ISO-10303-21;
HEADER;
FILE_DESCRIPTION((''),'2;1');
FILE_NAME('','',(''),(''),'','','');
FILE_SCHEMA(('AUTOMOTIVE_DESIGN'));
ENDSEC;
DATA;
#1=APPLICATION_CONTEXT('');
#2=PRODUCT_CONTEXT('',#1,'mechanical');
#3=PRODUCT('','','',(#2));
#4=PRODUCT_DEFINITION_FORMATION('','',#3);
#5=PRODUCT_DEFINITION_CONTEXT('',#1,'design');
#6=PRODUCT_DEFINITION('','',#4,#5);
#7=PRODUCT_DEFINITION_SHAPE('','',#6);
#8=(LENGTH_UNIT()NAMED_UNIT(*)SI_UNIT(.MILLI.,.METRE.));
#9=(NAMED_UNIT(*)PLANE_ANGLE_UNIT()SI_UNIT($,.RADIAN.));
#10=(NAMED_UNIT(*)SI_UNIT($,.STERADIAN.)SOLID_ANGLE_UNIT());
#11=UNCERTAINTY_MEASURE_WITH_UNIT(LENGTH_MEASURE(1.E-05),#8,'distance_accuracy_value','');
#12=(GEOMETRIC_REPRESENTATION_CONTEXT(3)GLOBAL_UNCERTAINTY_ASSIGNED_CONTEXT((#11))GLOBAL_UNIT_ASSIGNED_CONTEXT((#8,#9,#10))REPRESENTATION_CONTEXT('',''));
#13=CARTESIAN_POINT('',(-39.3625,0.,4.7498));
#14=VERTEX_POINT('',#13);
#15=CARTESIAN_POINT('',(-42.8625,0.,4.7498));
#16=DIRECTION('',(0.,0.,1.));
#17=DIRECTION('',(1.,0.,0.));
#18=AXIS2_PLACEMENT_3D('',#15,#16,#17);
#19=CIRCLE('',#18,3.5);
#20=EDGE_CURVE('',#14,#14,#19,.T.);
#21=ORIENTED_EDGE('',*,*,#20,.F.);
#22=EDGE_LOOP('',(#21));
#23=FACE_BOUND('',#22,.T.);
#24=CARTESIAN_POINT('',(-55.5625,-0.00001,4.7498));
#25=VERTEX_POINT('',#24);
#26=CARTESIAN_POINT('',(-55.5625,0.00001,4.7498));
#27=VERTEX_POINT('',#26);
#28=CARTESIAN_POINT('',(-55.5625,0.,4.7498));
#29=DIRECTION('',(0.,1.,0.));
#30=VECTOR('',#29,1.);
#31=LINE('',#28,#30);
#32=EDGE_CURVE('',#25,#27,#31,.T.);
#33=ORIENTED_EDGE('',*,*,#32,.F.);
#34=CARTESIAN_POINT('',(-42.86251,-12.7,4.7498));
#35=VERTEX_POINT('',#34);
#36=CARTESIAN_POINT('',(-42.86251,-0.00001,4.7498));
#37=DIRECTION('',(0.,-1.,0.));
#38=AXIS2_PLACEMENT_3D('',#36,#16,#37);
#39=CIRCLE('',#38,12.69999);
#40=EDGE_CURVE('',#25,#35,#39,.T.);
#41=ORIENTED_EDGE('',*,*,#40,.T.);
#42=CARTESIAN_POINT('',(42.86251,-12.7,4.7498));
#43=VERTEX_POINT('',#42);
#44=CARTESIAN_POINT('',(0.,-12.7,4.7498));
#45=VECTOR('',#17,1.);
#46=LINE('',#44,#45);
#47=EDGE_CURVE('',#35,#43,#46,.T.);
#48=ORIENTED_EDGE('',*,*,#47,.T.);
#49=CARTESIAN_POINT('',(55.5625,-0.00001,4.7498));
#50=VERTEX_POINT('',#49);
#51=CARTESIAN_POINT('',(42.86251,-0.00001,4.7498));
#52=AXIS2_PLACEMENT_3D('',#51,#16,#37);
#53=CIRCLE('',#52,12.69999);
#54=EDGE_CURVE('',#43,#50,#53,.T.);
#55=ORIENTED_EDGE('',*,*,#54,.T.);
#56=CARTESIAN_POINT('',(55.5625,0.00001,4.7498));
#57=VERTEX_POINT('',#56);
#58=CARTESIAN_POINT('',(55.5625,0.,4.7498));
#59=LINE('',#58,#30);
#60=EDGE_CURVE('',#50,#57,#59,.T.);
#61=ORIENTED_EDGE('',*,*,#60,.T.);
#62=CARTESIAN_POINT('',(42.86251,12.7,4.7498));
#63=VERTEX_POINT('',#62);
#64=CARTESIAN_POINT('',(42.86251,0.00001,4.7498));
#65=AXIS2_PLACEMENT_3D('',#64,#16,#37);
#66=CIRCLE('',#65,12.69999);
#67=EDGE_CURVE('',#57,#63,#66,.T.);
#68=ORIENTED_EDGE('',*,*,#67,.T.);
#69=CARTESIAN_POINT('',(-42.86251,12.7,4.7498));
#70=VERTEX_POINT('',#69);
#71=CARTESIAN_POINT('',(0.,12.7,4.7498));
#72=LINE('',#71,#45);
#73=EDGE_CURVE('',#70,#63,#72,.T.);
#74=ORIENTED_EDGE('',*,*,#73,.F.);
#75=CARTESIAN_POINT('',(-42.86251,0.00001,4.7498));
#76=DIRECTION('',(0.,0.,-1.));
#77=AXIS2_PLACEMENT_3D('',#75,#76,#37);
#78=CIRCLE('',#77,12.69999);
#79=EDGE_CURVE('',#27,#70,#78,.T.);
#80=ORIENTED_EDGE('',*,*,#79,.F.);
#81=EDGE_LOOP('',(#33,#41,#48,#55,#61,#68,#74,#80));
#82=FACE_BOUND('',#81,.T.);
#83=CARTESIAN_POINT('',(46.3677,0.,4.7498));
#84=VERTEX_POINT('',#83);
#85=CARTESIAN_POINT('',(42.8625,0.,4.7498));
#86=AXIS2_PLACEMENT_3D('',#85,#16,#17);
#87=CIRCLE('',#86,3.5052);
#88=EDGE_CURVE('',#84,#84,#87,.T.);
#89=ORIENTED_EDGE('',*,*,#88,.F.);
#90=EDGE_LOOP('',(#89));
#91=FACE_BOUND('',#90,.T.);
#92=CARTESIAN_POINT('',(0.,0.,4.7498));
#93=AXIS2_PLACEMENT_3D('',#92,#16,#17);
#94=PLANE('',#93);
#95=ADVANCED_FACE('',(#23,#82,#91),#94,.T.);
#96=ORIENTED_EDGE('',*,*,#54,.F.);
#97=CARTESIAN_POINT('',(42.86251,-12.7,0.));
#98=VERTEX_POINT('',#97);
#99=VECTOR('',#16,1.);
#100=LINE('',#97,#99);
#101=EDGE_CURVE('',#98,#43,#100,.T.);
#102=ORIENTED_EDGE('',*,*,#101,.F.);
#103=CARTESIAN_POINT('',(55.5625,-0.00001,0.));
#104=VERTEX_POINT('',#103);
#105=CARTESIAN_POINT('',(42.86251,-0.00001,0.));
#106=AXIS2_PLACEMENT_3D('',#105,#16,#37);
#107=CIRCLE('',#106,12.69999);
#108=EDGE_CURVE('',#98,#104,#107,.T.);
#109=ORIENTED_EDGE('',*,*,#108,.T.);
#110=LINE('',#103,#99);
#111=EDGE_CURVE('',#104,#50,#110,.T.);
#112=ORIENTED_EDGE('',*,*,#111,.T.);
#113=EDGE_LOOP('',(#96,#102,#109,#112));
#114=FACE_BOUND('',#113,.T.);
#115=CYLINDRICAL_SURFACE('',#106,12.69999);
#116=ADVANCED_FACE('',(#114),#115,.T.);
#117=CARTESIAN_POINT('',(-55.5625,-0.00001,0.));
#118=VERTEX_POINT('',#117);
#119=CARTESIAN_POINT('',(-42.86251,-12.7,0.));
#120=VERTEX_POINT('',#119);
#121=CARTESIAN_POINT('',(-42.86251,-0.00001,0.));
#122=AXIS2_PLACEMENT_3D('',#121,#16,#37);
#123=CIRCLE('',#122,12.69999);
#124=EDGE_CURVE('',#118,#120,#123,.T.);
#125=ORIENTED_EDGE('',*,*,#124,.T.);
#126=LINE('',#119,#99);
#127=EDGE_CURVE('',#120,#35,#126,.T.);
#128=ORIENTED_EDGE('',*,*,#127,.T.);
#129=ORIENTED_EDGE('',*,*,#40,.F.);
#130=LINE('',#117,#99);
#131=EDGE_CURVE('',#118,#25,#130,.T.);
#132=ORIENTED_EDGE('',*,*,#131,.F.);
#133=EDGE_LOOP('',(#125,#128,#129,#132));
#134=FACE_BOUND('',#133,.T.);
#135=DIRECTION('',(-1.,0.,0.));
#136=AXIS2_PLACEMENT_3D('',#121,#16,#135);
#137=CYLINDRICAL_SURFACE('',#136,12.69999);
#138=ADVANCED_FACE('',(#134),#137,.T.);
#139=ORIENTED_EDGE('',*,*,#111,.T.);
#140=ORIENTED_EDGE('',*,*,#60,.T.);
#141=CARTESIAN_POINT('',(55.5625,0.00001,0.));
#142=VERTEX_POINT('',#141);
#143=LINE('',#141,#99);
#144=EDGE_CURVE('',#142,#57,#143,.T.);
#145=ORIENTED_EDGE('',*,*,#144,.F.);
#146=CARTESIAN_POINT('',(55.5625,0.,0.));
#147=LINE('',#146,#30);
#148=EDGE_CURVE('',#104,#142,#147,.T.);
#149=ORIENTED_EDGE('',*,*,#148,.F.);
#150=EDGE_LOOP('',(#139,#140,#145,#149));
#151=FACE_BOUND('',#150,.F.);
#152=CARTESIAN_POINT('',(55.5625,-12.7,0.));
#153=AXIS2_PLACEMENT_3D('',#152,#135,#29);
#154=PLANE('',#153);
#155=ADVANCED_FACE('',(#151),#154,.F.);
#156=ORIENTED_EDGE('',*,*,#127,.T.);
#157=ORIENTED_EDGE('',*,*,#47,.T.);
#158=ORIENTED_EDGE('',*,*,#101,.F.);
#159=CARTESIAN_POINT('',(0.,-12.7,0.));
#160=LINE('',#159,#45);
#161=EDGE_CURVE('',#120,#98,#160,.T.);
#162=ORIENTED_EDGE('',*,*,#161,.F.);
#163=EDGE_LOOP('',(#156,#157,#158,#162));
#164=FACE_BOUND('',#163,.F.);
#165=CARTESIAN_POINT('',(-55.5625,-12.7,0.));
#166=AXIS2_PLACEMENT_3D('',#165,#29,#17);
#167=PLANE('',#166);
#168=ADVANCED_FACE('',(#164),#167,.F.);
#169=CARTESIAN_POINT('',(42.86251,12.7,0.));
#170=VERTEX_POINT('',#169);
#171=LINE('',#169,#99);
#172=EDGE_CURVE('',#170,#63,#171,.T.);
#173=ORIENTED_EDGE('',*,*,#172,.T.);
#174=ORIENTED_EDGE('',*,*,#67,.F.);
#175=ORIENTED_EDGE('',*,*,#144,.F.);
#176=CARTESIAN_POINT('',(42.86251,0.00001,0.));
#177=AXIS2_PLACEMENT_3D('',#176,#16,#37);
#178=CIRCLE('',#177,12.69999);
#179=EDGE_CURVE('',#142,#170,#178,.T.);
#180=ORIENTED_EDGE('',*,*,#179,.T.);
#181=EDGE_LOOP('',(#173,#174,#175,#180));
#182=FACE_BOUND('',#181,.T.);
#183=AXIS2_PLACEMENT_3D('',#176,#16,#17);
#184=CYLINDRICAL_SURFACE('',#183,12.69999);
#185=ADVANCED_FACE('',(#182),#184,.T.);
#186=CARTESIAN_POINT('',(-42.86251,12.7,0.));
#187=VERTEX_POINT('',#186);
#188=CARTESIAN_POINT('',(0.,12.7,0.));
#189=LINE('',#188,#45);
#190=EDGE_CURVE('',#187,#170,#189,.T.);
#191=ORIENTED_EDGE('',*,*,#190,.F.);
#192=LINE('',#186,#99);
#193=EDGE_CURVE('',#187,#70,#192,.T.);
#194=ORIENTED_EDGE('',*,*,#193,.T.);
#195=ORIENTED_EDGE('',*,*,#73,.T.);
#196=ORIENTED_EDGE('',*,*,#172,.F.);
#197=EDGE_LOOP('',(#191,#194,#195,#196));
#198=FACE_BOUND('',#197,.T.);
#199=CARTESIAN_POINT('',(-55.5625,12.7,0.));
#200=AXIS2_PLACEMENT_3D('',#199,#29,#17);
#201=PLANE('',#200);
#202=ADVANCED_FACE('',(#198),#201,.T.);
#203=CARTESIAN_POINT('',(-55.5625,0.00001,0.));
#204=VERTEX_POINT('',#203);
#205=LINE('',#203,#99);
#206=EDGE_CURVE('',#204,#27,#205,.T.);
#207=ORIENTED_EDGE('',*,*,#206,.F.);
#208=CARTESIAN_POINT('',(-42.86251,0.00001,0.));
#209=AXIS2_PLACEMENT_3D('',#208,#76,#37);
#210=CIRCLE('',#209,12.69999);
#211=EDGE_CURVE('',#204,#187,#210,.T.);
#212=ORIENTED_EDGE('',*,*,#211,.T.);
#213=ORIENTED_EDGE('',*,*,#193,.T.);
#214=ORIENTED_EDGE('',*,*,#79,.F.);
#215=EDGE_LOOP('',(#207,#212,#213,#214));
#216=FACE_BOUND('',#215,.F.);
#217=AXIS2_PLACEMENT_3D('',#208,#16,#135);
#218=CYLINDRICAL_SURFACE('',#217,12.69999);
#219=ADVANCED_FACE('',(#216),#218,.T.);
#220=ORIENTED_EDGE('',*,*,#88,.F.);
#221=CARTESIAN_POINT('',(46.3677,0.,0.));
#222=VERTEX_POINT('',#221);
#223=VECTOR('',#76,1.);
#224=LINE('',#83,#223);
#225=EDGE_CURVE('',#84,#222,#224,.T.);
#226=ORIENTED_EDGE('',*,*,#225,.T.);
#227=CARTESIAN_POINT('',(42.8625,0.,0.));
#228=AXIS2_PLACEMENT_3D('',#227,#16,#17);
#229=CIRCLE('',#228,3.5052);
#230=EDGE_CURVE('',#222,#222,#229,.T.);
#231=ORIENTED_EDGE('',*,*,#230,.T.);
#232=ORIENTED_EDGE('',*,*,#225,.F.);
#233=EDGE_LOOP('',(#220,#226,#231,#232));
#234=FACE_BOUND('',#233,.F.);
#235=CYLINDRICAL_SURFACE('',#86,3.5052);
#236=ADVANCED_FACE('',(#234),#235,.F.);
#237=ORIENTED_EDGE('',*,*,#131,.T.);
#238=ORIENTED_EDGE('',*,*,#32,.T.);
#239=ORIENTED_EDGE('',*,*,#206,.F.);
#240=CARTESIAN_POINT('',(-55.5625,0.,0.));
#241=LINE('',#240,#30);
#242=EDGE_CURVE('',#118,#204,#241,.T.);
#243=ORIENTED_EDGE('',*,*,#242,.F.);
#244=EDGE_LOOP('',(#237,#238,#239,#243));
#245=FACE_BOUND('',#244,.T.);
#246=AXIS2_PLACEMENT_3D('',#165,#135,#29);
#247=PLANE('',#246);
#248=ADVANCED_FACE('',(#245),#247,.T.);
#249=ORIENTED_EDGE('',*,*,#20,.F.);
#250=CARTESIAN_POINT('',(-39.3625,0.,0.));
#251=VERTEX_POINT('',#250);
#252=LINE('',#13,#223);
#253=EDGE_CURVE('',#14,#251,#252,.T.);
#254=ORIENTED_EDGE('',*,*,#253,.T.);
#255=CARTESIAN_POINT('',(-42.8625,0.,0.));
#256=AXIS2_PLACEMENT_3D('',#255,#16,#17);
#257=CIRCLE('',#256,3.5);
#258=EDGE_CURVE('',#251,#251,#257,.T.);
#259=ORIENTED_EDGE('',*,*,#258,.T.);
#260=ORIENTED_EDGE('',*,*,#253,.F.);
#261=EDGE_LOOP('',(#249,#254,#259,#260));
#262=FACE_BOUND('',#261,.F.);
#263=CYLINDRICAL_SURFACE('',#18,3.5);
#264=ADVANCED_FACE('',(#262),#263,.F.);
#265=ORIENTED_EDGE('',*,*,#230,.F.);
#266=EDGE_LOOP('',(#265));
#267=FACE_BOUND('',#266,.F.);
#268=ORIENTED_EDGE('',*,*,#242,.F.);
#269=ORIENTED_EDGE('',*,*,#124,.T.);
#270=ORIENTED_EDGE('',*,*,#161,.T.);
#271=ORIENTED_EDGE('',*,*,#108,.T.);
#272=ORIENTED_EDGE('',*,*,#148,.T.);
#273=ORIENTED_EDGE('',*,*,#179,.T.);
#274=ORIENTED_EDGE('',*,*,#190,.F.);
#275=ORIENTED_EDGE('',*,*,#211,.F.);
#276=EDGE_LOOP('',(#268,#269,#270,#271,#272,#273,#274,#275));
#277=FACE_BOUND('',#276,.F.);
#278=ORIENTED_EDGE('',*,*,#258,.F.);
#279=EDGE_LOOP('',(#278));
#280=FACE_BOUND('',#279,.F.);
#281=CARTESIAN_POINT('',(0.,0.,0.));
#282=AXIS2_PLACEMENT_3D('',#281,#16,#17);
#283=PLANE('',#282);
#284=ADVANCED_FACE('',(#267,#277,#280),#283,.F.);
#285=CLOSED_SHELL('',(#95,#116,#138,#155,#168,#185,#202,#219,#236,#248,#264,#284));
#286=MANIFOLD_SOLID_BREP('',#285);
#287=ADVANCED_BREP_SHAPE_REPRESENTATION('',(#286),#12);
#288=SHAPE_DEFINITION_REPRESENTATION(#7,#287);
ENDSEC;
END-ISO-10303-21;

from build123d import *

# Parameters (mm, degrees)
F0_W     = 111.125
F0_H     = 25.4
F1_DEPTH = 4.7498
F2_R     = 12.69999
F3_R     = 3.5
F3_R_2   = 3.5052
F4_DEPTH = 25.4


# Not quite as in the source:
# - a fillet or chamfer is up to 0.001 mm smaller than in the source, because OpenCascade refuses the exact size


with BuildPart() as f1:
    # F0 (on Top) → F1 (new body)
    with BuildSketch(Plane.XY):
        Rectangle(F0_W, F0_H)
    extrude(amount=F1_DEPTH)

    # F2 (radius 12.7 in the source; OpenCascade refuses exactly that, so slightly less here)
    f2_edges = [f1.edges().sort_by_distance(p)[0] for p in [
        (-55.5625, -12.7, 2.3749),
        (-55.5625, 12.7, 2.3749),
        (55.5625, -12.7, 2.3749),
        (55.5625, 12.7, 2.3749),
    ]]
    fillet(f2_edges, radius=F2_R)

    # F3 (on face) → F4 (cut)
    with BuildSketch(Plane.XY.offset(4.7498)):
        with Locations((-42.8625, 0)):
            Circle(F3_R)
        with Locations((42.8625, 0)):
            Circle(F3_R_2)
    extrude(amount=-F4_DEPTH, mode=Mode.SUBTRACT)


solid = f1.part
